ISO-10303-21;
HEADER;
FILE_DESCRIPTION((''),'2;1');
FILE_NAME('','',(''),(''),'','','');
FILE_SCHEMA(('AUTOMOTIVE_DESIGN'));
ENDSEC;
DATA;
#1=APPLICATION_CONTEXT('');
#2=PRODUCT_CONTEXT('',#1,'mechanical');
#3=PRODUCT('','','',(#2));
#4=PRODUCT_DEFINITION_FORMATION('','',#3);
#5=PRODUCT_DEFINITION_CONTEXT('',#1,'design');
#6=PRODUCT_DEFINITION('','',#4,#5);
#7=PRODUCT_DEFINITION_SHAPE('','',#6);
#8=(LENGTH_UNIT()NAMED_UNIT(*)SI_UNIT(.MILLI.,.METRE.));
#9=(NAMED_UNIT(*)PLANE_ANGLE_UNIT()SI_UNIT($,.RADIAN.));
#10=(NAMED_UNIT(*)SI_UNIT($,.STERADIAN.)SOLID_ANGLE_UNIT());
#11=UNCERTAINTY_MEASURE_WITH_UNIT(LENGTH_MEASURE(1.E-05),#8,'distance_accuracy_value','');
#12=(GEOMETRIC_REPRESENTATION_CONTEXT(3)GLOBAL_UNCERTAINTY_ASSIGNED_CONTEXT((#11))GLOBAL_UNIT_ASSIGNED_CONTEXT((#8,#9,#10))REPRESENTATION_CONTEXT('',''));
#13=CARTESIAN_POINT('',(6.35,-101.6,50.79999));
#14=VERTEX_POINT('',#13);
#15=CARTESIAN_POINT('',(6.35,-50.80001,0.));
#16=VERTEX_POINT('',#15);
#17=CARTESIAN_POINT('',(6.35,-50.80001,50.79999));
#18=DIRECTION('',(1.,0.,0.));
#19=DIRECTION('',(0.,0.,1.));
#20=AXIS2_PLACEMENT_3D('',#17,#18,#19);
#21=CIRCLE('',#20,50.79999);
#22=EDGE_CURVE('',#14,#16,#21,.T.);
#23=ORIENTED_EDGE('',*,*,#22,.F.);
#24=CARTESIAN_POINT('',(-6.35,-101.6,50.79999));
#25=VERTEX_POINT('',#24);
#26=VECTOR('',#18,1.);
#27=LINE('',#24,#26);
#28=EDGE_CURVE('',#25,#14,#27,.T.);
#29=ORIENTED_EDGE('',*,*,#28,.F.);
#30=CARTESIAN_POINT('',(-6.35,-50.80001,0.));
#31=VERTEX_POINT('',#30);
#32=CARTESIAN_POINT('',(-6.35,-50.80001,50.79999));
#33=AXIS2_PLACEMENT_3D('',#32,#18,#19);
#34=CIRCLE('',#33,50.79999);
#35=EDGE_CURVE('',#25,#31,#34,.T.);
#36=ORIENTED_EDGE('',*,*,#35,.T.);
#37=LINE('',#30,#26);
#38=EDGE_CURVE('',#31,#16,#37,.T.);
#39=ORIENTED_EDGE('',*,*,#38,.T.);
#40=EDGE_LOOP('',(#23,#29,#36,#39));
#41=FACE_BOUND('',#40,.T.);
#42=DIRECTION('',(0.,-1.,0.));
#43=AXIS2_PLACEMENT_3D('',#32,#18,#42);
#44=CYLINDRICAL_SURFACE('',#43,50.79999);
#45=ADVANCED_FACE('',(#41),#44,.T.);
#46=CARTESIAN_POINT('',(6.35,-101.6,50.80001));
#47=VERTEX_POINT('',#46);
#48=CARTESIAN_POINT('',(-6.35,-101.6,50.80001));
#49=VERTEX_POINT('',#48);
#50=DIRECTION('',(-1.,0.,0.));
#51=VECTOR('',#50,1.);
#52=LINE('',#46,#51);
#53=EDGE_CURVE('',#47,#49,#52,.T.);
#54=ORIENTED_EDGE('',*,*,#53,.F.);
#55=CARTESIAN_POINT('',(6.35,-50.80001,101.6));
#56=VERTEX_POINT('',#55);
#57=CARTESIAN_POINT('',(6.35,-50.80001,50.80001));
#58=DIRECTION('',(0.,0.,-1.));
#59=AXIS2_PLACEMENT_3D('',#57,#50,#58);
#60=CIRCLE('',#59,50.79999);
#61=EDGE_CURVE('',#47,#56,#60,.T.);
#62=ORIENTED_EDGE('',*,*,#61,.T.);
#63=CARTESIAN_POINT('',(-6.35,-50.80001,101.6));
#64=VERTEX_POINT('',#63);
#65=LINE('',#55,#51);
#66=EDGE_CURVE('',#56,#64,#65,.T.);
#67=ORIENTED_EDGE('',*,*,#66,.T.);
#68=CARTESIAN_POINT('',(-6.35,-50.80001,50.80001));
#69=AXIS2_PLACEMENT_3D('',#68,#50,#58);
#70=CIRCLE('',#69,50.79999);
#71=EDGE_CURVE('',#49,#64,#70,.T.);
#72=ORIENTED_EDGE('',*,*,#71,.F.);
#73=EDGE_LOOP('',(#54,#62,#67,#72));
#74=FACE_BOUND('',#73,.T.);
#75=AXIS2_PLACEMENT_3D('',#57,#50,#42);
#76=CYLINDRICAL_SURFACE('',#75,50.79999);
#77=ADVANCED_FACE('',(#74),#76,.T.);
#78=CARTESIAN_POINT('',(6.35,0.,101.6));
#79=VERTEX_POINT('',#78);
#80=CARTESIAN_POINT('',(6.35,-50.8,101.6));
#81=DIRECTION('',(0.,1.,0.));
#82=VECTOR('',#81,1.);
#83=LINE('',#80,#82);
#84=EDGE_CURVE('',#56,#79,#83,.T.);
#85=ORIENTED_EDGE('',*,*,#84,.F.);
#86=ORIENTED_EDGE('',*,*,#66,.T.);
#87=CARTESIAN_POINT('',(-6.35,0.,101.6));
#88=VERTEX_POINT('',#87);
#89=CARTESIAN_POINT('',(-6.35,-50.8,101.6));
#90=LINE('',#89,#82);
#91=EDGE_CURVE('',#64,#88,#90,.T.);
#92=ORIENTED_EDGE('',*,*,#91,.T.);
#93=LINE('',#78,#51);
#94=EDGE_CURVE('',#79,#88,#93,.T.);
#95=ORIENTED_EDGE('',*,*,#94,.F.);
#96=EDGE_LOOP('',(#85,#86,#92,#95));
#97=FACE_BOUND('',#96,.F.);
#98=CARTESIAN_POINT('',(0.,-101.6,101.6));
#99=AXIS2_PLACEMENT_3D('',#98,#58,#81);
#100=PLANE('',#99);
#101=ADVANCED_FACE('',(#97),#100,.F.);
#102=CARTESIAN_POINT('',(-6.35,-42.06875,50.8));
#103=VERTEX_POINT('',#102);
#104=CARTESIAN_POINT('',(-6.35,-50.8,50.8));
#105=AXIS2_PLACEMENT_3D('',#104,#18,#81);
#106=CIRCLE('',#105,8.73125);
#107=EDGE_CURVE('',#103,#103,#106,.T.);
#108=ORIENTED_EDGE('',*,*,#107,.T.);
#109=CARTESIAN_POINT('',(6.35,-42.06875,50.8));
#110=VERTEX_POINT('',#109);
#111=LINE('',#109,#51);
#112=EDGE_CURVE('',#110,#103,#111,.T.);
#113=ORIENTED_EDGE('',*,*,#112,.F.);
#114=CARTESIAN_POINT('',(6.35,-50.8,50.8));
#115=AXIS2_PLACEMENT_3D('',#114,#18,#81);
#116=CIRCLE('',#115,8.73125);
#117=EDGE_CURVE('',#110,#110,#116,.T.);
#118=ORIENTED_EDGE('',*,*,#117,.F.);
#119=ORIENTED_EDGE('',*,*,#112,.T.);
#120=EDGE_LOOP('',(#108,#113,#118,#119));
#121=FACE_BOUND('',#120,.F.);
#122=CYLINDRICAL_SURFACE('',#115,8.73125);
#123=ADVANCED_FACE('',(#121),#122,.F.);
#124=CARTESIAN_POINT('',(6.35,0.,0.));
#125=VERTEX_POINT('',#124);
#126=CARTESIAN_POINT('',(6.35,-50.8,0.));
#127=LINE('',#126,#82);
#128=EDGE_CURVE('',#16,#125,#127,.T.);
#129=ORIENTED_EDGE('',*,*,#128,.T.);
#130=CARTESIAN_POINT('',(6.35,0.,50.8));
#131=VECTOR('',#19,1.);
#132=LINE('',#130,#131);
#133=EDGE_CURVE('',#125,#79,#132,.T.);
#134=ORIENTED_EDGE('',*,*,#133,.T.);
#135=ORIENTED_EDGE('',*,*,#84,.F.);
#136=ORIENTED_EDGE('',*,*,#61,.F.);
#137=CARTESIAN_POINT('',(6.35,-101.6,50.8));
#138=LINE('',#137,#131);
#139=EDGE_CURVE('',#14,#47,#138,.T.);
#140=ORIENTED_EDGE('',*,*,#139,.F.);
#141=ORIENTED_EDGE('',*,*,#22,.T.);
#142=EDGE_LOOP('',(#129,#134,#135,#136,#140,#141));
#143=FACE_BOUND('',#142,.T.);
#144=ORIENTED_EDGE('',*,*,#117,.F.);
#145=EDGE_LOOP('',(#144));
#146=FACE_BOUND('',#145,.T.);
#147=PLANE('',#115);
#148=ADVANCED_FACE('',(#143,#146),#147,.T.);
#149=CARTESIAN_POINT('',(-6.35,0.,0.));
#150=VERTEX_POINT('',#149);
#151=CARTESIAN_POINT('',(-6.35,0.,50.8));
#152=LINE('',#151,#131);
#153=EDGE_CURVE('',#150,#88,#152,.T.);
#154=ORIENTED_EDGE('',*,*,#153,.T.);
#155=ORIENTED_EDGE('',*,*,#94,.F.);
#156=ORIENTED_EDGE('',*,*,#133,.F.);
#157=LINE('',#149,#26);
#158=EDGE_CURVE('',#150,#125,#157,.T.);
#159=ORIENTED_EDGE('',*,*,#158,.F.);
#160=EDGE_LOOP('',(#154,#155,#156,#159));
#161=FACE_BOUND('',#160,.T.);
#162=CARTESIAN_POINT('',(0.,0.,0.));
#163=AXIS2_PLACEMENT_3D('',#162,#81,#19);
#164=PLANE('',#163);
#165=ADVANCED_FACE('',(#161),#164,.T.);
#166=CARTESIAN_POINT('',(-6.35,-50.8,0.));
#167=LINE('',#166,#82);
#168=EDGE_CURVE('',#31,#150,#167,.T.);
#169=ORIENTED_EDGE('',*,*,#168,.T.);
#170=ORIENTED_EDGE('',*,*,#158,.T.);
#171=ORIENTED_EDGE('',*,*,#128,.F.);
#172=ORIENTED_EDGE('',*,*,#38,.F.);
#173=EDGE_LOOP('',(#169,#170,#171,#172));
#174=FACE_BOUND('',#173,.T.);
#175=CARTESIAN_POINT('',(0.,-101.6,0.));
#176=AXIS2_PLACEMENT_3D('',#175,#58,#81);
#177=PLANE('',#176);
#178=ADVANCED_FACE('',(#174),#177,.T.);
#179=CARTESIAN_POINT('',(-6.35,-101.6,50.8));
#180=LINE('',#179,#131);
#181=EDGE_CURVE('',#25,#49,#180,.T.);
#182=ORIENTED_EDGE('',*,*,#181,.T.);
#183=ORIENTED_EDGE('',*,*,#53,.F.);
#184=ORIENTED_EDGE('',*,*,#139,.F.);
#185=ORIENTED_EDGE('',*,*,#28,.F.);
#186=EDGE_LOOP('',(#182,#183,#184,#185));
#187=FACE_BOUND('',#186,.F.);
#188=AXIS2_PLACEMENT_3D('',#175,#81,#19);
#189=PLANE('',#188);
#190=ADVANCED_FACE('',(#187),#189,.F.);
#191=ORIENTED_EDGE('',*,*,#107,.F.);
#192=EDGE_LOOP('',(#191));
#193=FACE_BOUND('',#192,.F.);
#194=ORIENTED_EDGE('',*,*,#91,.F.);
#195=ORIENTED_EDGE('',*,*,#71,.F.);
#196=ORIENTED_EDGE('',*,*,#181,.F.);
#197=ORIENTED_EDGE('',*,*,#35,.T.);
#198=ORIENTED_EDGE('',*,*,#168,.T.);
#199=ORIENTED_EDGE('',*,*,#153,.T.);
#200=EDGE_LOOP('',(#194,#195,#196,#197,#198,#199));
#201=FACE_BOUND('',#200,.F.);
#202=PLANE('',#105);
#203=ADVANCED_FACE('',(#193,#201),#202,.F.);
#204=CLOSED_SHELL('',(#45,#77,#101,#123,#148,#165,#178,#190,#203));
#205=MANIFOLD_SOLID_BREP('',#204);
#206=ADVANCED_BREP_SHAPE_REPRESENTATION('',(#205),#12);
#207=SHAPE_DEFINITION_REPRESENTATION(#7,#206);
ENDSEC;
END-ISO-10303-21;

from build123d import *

# Parameters (mm, degrees)
F0_W     = 101.6
F0_H     = 101.6
F1_DEPTH = 6.35
F2_R     = 50.79999
F3_R     = 8.73125
F4_DEPTH = 25.4


# Not quite as in the source:
# - a fillet or chamfer is up to 0.001 mm smaller than in the source, because OpenCascade refuses the exact size


with BuildPart() as f1:
    # F0 (on Right) → F1 (new body, symmetric)
    with BuildSketch(Plane.YZ):
        with Locations((-50.8, 50.8)):
            Rectangle(F0_W, F0_H)
    extrude(amount=F1_DEPTH, both=True)

    # F2 (radius 50.8 in the source; OpenCascade refuses exactly that, so slightly less here)
    f2_edges = [f1.edges().sort_by_distance(p)[0] for p in [
        (0, -101.6, 101.6),
        (0, -101.6, 0),
    ]]
    fillet(f2_edges, radius=F2_R)

    # F3 (on face) → F4 (cut)
    with BuildSketch(Plane.YZ.offset(6.35)):
        with Locations((-50.8, 50.8)):
            Circle(F3_R)
    extrude(amount=-F4_DEPTH, mode=Mode.SUBTRACT)


solid = f1.part
